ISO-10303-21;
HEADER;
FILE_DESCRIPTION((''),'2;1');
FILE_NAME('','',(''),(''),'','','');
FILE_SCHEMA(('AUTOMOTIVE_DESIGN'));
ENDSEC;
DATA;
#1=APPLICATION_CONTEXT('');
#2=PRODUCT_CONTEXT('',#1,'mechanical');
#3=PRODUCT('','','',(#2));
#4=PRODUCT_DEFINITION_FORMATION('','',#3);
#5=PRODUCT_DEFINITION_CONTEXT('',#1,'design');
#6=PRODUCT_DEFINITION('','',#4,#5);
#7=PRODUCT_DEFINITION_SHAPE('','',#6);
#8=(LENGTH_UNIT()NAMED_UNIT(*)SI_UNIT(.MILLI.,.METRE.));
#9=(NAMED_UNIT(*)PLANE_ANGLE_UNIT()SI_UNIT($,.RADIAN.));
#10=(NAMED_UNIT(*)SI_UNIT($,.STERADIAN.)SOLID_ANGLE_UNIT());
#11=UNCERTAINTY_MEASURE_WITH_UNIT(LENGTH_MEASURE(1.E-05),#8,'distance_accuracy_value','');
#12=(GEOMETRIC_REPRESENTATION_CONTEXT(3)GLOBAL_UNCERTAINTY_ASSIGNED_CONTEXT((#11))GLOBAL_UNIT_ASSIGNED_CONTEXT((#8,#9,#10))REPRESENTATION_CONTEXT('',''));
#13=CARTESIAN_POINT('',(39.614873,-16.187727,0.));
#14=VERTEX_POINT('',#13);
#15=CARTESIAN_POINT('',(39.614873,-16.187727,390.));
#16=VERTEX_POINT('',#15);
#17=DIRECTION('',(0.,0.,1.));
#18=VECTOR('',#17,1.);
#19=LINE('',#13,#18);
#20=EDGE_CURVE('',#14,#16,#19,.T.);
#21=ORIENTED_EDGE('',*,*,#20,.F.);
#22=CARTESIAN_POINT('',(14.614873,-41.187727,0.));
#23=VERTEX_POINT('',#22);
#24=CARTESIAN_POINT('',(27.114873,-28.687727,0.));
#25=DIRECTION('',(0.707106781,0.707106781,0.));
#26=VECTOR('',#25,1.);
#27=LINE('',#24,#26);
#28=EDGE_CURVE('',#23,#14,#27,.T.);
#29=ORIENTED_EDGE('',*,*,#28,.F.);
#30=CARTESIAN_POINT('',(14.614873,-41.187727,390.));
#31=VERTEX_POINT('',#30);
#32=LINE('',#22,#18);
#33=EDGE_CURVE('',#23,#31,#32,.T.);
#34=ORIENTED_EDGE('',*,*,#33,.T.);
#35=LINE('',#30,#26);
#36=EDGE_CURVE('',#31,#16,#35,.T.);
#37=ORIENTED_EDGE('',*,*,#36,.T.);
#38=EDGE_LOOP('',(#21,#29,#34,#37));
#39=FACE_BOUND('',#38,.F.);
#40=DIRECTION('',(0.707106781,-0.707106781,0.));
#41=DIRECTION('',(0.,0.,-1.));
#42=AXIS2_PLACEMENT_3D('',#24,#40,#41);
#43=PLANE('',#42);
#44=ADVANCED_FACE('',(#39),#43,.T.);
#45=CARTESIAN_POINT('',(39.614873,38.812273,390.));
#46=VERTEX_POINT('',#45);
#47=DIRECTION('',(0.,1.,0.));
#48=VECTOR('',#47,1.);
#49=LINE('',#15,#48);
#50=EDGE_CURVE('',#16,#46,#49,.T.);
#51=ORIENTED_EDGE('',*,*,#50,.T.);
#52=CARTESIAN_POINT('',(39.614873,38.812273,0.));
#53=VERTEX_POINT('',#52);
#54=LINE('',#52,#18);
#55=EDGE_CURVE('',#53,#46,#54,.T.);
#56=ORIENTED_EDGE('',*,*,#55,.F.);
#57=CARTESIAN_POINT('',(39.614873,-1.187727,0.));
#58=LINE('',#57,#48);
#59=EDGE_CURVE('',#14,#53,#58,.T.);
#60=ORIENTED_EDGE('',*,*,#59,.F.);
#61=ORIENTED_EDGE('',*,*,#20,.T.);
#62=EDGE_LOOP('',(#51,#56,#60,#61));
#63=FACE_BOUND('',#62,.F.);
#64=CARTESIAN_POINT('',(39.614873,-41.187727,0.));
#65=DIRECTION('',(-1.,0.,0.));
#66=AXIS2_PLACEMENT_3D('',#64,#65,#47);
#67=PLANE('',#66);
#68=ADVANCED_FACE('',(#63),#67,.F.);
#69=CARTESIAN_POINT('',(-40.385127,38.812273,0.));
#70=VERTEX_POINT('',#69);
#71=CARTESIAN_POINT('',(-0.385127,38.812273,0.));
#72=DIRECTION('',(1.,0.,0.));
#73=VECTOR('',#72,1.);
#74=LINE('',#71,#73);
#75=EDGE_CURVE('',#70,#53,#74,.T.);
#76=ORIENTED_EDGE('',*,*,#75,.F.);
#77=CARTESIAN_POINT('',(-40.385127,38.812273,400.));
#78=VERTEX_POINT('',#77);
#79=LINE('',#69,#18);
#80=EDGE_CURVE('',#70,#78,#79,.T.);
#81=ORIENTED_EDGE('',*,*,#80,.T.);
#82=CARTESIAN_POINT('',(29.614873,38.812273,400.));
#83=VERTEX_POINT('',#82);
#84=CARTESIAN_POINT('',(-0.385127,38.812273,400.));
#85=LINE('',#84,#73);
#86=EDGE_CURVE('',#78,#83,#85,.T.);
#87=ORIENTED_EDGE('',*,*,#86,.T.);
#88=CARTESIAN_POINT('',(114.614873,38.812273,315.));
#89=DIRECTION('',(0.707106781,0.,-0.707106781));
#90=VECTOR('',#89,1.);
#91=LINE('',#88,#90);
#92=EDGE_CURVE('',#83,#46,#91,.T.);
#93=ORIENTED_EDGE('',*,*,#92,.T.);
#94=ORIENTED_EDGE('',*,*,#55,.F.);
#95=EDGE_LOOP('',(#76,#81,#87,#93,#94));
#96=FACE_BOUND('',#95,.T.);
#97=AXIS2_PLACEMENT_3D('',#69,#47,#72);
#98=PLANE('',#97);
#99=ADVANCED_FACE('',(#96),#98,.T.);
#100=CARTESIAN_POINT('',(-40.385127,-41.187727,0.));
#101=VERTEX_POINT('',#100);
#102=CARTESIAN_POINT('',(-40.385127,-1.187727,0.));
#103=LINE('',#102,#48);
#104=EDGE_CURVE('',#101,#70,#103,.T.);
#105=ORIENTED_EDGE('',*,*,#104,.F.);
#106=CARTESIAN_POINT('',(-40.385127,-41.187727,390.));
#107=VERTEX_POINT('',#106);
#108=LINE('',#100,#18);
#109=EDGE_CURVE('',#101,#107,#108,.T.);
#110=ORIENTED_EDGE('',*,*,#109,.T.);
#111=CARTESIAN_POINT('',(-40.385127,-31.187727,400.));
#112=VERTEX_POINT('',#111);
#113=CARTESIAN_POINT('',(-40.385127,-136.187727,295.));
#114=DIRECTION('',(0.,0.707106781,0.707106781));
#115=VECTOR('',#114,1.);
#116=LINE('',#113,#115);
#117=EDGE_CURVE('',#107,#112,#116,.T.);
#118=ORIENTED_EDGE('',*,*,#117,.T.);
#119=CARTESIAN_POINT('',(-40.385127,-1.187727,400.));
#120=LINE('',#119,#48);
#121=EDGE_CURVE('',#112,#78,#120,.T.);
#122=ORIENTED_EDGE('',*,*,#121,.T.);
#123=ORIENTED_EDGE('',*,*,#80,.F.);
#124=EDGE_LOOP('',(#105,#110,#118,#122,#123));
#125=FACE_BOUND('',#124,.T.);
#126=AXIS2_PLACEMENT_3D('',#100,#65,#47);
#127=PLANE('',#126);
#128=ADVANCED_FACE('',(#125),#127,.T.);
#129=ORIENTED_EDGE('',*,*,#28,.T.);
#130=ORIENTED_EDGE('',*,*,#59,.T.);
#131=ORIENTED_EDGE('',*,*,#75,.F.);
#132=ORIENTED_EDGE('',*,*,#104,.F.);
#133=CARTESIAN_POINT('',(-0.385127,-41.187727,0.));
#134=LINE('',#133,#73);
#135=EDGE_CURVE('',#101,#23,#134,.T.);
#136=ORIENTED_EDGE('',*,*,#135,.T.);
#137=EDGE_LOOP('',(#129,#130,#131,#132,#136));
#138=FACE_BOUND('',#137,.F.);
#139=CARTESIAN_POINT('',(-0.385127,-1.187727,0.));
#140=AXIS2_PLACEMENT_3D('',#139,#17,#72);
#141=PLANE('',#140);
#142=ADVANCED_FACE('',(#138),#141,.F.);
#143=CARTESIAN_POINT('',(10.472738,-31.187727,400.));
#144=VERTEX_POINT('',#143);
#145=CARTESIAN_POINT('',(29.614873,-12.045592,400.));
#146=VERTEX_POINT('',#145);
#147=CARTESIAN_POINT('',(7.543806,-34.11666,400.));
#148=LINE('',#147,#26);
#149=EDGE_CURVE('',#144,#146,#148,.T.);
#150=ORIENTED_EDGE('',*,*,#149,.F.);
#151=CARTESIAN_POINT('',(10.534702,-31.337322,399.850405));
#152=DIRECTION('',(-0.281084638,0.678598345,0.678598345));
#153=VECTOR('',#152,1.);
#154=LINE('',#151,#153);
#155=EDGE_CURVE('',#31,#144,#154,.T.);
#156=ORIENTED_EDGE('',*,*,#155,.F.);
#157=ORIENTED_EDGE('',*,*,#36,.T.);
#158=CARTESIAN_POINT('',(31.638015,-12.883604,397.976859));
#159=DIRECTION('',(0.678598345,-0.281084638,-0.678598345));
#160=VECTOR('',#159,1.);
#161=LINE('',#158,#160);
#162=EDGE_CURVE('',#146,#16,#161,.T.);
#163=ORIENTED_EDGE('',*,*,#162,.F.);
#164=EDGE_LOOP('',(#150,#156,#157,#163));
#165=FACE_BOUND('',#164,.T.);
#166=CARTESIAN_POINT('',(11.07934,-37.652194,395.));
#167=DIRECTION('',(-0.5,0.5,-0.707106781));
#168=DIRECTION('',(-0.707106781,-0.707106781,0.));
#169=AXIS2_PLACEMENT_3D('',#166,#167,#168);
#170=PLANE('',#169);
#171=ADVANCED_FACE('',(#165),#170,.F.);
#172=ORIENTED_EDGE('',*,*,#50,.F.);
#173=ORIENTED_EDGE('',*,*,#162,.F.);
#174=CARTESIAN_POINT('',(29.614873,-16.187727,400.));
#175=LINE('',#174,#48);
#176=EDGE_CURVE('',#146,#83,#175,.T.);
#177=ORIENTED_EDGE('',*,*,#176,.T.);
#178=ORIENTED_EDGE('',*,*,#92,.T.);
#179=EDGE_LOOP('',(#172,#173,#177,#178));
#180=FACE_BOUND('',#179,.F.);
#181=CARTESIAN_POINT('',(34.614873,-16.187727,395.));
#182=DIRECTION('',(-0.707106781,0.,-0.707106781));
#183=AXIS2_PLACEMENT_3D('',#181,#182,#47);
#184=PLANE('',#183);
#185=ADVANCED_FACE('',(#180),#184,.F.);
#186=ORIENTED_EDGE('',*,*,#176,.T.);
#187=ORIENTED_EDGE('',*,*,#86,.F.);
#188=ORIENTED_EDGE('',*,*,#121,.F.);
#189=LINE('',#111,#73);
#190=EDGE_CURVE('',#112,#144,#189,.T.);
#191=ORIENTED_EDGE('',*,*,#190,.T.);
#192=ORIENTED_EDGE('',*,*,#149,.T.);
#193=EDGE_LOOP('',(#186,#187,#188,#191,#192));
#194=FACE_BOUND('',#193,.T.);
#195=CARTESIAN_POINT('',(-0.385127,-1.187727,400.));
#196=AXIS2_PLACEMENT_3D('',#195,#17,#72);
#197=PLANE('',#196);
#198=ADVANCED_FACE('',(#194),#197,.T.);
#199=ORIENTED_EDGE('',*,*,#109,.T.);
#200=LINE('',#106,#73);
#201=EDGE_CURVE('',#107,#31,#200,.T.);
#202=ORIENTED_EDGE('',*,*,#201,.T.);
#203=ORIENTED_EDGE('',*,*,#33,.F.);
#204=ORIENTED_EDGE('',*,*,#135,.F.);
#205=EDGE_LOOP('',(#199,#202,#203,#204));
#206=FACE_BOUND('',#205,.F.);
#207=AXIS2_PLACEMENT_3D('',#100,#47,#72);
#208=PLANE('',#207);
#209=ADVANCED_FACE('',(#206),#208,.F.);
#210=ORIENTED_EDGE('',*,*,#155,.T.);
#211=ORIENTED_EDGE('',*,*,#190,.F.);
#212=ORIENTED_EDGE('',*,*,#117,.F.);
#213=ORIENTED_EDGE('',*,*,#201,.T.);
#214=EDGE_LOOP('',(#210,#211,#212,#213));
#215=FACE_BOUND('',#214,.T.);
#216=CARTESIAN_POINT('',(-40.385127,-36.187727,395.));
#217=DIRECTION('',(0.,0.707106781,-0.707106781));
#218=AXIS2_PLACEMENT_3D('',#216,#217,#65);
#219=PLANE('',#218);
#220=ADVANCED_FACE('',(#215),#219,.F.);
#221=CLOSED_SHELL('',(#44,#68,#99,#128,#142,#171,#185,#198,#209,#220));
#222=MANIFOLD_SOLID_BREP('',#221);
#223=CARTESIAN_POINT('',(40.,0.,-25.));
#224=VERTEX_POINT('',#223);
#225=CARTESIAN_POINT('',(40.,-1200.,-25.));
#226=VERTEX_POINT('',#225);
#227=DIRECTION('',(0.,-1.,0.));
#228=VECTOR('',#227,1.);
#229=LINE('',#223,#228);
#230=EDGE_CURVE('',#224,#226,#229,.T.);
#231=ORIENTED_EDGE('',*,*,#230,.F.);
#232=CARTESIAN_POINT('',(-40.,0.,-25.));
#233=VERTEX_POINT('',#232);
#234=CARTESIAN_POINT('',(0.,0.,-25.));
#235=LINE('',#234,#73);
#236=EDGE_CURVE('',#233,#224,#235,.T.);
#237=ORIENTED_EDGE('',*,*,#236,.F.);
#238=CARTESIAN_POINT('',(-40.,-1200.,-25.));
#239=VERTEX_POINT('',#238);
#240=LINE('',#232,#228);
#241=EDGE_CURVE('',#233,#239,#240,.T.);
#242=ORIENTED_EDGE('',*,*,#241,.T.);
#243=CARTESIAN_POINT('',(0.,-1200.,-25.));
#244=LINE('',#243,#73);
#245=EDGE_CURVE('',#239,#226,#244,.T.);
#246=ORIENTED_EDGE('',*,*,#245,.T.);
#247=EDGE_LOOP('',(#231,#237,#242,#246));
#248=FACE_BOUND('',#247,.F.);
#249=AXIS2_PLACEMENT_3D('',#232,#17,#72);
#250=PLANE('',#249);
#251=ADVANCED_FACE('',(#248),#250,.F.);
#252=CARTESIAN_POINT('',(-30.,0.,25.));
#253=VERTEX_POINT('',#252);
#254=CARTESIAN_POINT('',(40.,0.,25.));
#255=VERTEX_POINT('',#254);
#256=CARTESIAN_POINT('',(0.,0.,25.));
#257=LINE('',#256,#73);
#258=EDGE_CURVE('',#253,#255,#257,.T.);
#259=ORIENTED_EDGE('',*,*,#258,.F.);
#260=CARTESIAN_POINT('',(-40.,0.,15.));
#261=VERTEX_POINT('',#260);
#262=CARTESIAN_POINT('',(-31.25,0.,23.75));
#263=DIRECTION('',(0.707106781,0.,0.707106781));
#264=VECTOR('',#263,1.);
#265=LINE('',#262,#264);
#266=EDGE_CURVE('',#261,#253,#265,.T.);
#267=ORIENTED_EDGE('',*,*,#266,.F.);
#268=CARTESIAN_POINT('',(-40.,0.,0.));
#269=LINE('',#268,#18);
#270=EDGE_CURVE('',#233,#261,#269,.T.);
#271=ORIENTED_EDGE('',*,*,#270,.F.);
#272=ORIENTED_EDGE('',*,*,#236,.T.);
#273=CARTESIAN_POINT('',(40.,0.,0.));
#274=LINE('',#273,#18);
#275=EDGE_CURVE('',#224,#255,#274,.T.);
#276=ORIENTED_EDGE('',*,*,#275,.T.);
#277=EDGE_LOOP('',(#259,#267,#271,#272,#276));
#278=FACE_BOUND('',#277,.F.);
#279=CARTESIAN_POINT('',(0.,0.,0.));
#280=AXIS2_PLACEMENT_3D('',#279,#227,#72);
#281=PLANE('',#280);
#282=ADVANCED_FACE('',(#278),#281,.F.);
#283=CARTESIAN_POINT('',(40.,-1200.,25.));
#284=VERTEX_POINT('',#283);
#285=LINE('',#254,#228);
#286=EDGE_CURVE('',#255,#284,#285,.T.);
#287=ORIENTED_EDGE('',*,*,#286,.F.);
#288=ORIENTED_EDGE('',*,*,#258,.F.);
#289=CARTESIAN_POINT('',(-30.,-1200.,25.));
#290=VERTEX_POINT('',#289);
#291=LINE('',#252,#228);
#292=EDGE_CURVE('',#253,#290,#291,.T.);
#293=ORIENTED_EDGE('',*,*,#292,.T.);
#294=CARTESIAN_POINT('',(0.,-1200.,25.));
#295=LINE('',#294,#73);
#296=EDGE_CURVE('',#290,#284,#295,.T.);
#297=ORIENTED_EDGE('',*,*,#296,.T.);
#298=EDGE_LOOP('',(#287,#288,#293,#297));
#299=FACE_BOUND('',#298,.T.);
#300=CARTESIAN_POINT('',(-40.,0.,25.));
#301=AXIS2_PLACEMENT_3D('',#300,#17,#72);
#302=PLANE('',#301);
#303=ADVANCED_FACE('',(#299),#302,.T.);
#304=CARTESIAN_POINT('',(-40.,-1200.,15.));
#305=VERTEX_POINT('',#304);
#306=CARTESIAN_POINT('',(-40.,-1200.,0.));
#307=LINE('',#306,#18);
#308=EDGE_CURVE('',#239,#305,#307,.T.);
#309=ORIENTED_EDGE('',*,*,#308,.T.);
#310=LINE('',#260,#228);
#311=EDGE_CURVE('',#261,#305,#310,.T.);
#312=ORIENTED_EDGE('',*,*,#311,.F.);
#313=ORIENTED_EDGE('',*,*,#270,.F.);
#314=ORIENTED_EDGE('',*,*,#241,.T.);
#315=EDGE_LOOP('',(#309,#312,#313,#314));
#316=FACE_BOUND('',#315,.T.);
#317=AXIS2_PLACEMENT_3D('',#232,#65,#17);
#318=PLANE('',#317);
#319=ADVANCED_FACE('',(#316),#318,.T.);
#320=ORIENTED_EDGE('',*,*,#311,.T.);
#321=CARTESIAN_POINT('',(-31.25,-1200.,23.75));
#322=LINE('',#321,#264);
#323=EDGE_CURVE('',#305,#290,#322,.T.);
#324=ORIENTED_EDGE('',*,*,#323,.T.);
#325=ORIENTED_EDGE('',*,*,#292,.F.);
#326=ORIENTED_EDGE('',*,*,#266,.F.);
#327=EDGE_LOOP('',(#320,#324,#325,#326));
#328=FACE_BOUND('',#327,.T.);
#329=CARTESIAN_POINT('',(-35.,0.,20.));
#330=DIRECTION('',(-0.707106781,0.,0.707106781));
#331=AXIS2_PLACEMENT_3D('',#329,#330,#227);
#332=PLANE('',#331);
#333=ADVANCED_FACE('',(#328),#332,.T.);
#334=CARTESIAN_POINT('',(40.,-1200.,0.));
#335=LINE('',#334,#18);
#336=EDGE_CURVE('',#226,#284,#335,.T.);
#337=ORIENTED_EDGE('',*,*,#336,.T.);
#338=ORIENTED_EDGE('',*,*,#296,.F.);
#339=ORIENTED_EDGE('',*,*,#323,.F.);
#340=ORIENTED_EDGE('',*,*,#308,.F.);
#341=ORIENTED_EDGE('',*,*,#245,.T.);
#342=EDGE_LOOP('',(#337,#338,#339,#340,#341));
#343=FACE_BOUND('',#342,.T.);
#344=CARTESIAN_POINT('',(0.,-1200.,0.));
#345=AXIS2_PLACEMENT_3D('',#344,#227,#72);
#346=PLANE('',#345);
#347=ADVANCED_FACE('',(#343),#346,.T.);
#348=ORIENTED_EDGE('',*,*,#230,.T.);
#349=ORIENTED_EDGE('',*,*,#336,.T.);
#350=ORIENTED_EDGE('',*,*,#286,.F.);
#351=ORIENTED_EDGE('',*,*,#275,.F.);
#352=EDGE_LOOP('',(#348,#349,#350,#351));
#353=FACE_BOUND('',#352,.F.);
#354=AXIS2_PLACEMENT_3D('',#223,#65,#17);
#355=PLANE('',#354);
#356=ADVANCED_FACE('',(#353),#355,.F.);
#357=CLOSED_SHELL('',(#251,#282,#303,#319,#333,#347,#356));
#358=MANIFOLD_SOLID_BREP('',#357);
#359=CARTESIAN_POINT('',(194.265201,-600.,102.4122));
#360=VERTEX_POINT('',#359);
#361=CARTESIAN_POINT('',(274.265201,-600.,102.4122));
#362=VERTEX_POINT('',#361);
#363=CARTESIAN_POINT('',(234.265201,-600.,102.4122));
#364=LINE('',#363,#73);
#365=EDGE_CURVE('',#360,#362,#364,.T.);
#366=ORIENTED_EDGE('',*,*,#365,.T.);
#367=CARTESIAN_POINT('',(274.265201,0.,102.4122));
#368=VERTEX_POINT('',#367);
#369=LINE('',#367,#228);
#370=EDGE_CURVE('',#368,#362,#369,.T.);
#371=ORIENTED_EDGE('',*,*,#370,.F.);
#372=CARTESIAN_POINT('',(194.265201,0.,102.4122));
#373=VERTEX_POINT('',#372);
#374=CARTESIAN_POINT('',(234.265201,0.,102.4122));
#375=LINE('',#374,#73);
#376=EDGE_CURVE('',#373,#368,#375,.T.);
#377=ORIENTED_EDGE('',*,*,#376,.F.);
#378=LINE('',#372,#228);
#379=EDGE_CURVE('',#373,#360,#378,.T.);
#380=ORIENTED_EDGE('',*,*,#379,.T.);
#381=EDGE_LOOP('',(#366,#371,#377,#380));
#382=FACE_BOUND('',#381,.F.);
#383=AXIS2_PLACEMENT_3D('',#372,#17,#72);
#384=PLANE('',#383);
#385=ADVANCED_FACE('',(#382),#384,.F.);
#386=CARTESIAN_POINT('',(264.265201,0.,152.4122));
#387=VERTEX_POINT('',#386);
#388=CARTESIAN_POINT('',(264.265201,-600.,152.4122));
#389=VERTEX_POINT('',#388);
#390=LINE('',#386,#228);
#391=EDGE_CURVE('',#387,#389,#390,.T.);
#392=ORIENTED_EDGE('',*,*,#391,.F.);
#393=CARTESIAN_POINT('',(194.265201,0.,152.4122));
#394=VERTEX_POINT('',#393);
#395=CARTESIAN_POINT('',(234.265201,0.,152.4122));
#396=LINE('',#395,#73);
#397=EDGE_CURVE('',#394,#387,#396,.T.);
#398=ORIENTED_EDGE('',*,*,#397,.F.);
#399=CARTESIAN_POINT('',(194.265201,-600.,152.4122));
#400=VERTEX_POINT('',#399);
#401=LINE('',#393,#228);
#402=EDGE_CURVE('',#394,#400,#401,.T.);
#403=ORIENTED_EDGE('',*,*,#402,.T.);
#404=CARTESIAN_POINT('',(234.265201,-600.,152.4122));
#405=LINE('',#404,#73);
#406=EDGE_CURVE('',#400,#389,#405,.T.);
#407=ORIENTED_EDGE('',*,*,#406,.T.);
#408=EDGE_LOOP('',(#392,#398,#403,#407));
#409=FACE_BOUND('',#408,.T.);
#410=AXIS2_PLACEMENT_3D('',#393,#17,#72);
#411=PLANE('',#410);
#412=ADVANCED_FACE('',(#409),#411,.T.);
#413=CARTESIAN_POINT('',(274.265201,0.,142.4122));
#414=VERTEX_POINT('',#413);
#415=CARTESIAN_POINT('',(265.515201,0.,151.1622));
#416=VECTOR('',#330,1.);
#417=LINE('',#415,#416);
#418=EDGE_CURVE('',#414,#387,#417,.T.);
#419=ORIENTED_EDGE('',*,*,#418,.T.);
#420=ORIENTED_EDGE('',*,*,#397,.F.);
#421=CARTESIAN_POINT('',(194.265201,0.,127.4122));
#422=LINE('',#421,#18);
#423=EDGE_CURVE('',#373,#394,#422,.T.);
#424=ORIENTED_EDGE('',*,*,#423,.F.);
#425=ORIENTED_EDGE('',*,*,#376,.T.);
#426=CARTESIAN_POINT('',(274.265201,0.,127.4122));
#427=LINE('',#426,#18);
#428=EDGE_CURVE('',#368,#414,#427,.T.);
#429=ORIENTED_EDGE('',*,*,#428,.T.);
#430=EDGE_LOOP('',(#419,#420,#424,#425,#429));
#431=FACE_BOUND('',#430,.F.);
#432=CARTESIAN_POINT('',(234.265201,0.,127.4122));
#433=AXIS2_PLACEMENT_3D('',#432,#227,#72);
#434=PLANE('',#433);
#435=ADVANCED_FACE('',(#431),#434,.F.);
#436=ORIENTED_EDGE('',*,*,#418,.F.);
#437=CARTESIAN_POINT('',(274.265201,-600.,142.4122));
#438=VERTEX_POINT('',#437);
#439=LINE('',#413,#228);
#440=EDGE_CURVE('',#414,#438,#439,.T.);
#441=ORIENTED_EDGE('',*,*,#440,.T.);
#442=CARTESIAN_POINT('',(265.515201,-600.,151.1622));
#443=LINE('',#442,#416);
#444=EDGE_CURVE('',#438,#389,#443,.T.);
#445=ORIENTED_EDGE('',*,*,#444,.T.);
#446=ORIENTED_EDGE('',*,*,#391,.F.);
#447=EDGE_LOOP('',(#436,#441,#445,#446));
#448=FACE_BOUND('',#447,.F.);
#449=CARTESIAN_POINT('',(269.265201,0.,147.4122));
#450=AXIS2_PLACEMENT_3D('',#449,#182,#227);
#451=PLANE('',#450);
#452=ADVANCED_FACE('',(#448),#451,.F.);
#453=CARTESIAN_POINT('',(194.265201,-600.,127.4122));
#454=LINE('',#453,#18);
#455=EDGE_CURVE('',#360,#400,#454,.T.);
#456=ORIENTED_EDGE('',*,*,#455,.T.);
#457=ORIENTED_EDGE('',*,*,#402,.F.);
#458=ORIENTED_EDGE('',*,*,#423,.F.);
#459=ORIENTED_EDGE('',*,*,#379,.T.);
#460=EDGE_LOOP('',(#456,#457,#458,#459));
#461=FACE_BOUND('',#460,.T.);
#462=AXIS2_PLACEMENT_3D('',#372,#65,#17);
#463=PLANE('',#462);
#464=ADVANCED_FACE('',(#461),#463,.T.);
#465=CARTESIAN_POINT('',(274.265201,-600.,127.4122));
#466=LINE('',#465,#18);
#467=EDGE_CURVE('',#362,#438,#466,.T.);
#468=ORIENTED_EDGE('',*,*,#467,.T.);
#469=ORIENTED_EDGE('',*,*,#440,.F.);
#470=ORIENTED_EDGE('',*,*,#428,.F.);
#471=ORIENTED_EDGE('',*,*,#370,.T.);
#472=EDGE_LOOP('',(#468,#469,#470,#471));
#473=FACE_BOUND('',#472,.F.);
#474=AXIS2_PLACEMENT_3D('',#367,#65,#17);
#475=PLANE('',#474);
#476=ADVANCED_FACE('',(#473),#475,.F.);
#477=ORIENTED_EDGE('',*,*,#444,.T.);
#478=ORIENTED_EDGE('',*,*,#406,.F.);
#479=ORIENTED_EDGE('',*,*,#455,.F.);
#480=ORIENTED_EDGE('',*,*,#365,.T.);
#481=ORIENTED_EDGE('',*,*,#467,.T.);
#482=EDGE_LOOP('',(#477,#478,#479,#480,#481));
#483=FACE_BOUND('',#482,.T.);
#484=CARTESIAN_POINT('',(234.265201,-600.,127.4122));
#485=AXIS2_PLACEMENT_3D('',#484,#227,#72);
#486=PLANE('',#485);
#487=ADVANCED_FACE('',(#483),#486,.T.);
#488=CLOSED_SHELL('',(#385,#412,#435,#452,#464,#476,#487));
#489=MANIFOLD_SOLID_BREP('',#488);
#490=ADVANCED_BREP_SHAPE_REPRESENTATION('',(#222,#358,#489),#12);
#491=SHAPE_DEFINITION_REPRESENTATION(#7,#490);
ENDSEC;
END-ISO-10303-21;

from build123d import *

# Parameters (mm, degrees)
F0_W     = 80
F0_H     = 80
F1_DEPTH = 400
F2_SIZE  = 25
F3_SIZE  = 10
F4_W     = 80
F4_H     = 50
F5_DEPTH = 600
F6_W     = 80
F6_H     = 50
F7_DEPTH = 1200
F8_SIZE  = 10
F9_SIZE  = 10


with BuildPart() as f1:
    # F0 (on Top) → F1 (new body)
    with BuildSketch(Plane.XY):
        with Locations((-0.3851265647, -1.187727477)):
            Rectangle(F0_W, F0_H)
    extrude(amount=F1_DEPTH)

    # F2
    f2_edges = [f1.edges().sort_by_distance(p)[0] for p in [
        (39.614873, -41.187727, 200),
    ]]
    chamfer(f2_edges, length=F2_SIZE)

    # F3
    f3_edges = [f1.edges().sort_by_distance(p)[0] for p in [
        (-12.885127, -41.187727, 400),
        (39.614873, 11.312273, 400),
        (27.114873, -28.687727, 400),
    ]]
    chamfer(f3_edges, length=F3_SIZE)


with BuildPart() as f5:
    # F4 (on Front) → F5 (new body)
    with BuildSketch(Plane.XZ):
        with Locations((234.2652007937, 127.4122001697)):
            Rectangle(F4_W, F4_H)
    extrude(amount=F5_DEPTH)

    # F8
    f8_edges = [f5.edges().sort_by_distance(p)[0] for p in [
        (274.265201, -300, 152.4122),
    ]]
    chamfer(f8_edges, length=F8_SIZE)


with BuildPart() as f7:
    # F6 (on Front) → F7 (new body)
    with BuildSketch(Plane.XZ):
        Rectangle(F6_W, F6_H)
    extrude(amount=F7_DEPTH)

    # F9
    f9_edges = [f7.edges().sort_by_distance(p)[0] for p in [
        (-40, -600, 25),
    ]]
    chamfer(f9_edges, length=F9_SIZE)


solid = Compound([f1.part, f5.part, f7.part])
